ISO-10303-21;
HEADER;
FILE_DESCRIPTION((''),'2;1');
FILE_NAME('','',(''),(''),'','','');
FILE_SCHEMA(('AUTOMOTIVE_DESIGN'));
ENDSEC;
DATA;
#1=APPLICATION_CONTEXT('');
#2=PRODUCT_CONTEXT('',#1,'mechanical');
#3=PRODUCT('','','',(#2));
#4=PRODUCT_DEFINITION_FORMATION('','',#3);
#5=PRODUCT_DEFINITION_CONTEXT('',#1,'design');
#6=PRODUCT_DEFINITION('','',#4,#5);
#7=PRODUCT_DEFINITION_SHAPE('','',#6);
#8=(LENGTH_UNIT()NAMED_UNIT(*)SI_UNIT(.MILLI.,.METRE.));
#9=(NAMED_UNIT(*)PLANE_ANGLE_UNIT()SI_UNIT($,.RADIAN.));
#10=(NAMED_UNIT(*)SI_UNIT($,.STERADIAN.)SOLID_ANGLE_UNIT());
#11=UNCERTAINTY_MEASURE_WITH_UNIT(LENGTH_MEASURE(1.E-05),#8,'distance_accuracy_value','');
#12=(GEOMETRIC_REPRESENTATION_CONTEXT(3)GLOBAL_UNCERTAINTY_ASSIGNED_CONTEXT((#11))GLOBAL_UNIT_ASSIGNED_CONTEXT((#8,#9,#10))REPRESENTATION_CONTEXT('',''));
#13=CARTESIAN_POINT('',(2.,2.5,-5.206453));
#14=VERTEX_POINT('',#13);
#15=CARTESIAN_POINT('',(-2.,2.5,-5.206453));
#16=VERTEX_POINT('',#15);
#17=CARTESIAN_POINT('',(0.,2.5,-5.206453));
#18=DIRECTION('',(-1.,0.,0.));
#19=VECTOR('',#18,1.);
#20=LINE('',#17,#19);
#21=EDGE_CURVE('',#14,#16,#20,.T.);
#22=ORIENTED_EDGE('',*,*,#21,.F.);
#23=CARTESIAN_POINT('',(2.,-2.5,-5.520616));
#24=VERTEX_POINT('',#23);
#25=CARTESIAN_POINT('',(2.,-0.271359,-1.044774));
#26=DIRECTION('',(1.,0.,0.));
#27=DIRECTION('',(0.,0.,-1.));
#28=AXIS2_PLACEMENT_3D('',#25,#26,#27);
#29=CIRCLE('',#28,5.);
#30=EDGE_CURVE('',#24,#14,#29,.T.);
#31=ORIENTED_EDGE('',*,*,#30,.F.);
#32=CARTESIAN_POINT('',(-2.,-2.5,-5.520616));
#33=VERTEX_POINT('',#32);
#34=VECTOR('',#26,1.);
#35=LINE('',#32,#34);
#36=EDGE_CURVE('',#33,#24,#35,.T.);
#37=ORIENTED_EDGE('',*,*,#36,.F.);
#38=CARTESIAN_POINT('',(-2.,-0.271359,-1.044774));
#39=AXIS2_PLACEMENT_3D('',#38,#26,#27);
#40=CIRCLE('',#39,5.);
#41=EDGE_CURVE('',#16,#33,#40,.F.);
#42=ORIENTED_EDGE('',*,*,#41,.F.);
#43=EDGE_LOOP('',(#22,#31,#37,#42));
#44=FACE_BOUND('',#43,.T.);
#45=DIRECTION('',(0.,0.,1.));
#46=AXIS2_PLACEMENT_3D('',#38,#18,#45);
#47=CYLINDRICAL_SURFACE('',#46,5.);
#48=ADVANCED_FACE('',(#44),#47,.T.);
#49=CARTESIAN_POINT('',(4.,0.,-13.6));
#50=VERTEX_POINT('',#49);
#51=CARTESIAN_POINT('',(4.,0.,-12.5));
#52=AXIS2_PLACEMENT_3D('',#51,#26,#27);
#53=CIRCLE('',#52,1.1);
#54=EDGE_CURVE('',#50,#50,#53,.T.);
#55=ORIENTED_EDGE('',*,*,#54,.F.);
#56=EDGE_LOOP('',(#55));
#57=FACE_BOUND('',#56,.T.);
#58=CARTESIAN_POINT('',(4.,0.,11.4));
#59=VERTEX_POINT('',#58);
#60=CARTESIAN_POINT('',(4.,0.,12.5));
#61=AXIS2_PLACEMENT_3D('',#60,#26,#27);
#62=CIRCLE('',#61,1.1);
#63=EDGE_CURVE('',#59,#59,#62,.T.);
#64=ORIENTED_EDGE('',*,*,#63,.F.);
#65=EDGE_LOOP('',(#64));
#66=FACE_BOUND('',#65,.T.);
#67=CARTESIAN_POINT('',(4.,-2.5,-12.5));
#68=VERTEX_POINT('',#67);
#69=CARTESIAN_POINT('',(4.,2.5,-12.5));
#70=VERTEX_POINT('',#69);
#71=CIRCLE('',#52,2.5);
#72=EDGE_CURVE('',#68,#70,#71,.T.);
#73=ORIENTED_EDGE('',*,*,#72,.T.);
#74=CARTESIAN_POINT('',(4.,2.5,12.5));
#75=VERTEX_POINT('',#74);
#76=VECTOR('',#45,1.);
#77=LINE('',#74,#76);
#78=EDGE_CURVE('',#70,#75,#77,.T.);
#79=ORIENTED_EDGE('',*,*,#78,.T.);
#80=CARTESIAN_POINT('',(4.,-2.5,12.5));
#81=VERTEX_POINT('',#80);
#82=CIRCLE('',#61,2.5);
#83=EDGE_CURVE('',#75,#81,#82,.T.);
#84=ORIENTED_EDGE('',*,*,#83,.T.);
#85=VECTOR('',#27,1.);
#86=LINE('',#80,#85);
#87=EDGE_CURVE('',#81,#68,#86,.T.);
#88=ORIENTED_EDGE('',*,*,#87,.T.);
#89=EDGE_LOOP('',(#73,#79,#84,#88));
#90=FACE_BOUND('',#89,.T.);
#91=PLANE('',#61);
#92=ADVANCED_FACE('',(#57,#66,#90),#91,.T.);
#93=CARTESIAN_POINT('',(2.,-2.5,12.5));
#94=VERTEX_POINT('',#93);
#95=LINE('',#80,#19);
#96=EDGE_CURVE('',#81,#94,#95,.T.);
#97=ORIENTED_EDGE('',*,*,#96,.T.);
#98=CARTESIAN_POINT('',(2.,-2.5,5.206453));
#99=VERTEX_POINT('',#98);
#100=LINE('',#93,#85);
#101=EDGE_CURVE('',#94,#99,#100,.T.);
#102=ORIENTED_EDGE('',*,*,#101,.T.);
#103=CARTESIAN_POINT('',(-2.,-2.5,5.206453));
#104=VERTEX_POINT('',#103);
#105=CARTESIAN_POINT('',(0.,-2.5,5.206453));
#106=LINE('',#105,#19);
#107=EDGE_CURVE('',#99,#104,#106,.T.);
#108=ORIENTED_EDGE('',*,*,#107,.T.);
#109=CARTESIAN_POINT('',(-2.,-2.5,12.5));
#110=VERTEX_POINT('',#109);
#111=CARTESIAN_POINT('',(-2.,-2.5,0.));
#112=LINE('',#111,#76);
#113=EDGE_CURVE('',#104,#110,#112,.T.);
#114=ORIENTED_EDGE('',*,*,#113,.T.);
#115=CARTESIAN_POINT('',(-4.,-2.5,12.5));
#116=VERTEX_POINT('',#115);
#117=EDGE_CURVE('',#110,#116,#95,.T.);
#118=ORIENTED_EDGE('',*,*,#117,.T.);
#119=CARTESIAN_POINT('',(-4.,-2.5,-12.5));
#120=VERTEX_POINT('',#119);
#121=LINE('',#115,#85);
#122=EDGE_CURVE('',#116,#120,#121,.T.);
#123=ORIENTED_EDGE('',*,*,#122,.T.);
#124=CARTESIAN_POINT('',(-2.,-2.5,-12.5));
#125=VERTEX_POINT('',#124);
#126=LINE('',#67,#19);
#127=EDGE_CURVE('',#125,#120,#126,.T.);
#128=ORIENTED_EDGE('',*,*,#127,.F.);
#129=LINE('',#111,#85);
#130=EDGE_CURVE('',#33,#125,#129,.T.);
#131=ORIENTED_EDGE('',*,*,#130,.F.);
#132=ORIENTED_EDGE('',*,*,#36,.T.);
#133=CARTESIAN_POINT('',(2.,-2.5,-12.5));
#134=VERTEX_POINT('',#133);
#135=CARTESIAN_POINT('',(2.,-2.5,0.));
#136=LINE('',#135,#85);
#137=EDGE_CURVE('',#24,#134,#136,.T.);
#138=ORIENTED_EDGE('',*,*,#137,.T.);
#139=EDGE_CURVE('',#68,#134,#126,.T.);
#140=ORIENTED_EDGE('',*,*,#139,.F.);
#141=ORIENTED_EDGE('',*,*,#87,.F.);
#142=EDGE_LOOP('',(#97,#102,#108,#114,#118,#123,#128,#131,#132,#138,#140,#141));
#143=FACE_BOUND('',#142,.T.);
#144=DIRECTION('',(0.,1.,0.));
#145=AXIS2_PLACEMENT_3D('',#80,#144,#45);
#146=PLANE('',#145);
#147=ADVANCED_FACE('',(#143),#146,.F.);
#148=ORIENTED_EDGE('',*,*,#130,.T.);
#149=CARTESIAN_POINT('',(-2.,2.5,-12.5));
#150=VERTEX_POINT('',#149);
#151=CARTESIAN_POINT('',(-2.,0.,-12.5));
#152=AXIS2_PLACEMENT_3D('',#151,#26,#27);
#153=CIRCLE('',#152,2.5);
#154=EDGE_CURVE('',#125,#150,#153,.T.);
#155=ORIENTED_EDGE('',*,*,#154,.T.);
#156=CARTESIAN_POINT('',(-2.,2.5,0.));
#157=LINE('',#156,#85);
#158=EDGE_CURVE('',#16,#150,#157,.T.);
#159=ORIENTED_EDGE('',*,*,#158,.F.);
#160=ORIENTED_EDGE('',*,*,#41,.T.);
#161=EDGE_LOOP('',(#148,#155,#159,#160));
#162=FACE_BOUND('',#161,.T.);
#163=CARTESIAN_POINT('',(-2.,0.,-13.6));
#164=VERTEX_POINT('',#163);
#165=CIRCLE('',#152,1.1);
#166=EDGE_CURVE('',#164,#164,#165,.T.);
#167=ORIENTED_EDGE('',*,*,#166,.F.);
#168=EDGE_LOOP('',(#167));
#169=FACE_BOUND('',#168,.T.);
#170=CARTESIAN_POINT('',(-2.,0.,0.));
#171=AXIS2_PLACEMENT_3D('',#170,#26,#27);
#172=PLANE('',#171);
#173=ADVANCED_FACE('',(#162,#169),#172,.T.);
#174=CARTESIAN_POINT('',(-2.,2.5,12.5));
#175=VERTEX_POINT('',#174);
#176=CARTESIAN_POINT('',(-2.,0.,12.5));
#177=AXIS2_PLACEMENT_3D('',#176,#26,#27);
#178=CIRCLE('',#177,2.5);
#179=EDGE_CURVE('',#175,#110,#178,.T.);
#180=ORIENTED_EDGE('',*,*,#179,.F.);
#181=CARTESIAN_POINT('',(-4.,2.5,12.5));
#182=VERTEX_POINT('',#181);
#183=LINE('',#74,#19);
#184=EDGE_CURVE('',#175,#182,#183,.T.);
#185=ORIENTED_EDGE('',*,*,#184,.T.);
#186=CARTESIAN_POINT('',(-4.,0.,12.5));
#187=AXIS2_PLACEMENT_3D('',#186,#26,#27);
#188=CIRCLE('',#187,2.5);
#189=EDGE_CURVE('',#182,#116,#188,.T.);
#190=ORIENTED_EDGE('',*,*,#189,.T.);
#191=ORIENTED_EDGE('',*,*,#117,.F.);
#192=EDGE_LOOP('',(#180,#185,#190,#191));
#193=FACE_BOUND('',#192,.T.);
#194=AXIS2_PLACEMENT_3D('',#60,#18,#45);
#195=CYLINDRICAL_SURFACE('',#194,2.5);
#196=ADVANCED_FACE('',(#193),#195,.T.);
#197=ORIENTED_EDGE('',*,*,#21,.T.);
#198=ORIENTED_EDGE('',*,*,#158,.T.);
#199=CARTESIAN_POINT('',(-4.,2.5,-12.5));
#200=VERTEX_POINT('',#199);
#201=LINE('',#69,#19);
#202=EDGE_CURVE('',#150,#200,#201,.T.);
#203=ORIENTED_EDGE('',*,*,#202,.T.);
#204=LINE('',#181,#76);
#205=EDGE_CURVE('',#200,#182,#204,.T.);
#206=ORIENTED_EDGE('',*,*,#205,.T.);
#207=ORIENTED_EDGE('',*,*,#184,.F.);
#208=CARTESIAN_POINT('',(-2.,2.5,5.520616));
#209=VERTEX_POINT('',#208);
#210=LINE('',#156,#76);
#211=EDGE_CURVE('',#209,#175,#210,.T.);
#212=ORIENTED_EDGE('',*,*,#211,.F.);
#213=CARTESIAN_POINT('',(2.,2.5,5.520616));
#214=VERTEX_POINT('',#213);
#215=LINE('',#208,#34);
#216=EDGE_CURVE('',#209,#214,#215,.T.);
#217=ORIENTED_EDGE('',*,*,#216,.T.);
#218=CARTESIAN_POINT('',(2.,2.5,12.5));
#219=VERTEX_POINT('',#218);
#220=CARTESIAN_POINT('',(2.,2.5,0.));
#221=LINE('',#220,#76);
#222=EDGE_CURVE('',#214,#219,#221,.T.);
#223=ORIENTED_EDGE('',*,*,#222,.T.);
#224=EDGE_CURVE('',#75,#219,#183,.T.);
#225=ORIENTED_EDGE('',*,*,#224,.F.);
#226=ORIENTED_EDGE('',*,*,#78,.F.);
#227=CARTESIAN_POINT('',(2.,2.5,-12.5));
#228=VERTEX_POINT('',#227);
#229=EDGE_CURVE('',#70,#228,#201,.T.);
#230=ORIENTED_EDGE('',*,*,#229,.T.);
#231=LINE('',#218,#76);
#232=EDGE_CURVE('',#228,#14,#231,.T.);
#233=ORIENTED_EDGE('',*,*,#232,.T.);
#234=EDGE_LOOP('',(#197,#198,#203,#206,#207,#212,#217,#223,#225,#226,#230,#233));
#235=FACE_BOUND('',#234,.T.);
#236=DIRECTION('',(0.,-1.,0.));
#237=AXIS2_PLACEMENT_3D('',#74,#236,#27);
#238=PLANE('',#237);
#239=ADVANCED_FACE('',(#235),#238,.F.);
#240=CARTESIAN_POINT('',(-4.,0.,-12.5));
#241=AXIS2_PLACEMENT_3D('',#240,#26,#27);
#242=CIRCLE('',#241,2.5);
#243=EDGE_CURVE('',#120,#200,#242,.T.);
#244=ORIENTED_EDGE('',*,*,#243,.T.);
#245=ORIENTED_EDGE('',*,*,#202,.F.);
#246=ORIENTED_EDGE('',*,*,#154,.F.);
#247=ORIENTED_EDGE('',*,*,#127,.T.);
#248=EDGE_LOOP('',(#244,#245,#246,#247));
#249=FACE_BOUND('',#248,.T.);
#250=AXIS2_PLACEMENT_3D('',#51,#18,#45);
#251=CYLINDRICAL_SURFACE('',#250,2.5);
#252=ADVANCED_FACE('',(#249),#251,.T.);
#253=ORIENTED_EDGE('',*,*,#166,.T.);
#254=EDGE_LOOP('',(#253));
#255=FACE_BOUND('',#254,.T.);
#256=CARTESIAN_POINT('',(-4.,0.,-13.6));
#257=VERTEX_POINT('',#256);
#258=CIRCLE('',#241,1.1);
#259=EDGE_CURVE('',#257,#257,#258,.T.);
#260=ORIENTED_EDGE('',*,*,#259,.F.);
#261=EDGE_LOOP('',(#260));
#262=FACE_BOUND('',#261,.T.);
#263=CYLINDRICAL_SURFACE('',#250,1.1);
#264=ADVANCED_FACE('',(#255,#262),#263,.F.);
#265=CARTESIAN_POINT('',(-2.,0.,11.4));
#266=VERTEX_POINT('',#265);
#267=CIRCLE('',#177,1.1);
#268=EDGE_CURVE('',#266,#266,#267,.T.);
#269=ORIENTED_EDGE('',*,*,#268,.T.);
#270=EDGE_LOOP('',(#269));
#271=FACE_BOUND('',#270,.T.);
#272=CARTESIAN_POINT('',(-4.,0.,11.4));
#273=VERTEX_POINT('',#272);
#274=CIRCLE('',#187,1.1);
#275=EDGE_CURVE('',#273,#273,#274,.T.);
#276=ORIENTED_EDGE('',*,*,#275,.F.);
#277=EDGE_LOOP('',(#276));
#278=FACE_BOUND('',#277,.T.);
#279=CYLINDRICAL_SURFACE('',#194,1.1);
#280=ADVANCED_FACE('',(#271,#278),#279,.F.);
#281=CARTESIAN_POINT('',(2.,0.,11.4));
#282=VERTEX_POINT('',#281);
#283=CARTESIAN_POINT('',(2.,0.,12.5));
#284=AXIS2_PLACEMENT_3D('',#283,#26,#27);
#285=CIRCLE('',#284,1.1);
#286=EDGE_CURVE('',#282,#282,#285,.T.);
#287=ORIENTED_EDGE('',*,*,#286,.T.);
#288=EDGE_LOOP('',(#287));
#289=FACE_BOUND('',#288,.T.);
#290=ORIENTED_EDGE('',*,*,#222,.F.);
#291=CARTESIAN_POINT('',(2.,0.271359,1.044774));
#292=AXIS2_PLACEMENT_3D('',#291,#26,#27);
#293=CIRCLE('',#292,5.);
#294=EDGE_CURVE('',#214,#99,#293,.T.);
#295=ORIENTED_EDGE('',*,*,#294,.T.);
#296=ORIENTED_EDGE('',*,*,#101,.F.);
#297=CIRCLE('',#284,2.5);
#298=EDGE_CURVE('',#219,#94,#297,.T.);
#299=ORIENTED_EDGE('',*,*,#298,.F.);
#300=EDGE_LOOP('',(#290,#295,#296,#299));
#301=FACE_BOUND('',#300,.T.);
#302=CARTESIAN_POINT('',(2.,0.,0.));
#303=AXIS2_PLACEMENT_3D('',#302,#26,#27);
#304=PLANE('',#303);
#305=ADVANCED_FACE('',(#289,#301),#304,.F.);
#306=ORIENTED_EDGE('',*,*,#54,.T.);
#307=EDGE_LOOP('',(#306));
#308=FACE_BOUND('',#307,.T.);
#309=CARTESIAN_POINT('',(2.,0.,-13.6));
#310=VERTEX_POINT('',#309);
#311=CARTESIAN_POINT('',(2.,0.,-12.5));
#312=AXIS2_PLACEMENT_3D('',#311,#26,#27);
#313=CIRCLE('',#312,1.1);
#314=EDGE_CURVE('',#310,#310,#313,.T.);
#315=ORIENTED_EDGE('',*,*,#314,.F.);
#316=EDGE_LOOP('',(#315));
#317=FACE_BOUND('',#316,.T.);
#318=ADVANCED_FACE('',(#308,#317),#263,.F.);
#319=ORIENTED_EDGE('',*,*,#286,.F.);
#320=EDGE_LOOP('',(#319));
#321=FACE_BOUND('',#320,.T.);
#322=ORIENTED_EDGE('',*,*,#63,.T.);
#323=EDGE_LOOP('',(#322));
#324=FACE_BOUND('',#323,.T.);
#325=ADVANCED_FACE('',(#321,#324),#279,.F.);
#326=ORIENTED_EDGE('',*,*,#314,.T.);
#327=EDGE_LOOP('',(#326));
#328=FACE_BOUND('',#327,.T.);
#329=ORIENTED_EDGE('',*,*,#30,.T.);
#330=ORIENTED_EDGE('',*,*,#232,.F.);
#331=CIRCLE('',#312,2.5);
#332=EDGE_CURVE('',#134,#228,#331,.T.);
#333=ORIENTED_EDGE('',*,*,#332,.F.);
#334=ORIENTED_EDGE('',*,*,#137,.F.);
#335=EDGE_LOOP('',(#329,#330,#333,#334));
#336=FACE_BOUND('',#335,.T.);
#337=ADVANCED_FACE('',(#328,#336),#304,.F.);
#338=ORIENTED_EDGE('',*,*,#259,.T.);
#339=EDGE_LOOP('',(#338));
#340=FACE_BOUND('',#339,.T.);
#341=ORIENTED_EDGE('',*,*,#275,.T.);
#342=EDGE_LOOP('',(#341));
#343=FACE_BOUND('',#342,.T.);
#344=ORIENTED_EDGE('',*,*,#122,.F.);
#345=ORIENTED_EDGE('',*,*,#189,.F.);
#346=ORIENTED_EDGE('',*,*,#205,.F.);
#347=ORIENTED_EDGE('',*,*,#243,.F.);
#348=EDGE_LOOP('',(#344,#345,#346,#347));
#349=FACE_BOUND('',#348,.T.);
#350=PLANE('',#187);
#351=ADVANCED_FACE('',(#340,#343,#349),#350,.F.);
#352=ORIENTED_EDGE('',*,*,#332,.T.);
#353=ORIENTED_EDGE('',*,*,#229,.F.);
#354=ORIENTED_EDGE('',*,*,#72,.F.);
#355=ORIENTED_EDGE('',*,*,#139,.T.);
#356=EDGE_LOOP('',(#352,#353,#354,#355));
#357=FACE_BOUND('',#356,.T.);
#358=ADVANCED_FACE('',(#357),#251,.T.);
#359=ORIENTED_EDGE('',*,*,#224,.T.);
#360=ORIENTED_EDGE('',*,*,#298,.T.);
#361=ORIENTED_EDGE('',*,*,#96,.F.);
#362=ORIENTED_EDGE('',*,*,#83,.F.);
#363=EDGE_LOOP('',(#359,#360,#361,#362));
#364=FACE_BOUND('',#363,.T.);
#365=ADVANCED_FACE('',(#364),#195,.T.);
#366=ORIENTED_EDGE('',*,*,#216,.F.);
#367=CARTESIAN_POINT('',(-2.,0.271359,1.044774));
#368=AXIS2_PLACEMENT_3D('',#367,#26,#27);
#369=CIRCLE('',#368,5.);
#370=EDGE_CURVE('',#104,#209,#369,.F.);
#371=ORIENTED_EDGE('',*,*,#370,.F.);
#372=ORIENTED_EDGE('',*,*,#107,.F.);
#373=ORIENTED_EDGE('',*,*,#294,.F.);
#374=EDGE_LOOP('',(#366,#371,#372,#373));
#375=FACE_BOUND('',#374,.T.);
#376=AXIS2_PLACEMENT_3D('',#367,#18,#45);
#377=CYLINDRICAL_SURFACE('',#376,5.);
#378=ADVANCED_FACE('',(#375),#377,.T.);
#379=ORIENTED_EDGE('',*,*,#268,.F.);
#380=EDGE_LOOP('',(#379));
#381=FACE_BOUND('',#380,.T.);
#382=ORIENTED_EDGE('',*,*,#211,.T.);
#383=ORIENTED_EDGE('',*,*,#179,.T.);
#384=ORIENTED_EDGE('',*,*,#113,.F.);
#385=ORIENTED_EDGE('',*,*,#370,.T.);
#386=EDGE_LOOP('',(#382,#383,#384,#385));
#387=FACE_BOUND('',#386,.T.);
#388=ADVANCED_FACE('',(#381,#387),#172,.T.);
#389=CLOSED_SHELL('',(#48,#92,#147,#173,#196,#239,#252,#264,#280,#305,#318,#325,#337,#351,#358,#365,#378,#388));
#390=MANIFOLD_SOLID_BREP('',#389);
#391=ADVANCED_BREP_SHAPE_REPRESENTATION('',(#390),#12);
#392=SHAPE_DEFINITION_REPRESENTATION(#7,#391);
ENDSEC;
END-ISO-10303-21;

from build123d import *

# Parameters (mm, degrees)
SKETCH_1_R          = 1.1
EXTRUDE_1_DEPTH     = 4
SKETCH_2_R          = 4
CUT_EXTRUDE_1_DEPTH = 2
FILLET_1_R          = 5


with BuildPart() as part:
    # 草图1 → 凸台-拉伸1 (new, symmetric)
    with BuildSketch(Plane(origin=(0, 0, 0), x_dir=(0, 0, -1), z_dir=(1, 0, 0))):
        with BuildLine():
            Line((-12.5, 2.5), (12.5, 2.5))
            ThreePointArc((12.5, 2.5), (15, 0), (12.5, -2.5))
            Line((12.5, -2.5), (-12.5, -2.5))
            ThreePointArc((-12.5, -2.5), (-15, 0), (-12.5, 2.5))
        make_face()
        with Locations((12.5, 0)):
            Circle(SKETCH_1_R, mode=Mode.SUBTRACT)
        with Locations((-12.5, 0)):
            Circle(SKETCH_1_R, mode=Mode.SUBTRACT)
    extrude(amount=EXTRUDE_1_DEPTH, both=True)

    # 草图2 → 切除-拉伸1 (cut, symmetric)
    with BuildSketch(Plane(origin=(0, 0, 0), x_dir=(0, 0, -1), z_dir=(1, 0, 0))):
        with BuildLine():
            ThreePointArc((-9.377501001, 2.5), (-8.725745372, 1.324764885), (-8.5, 0))
            Line((-8.5, 0), (-5.520616019, 2.5))
            Line((-5.520616019, 2.5), (-9.377501001, 2.5))
        make_face()
        with BuildLine():
            Line((-5.520616019, -2.5), (-8.5, 0))
            ThreePointArc((-8.5, 0), (-8.725745372, -1.324764885), (-9.377501001, -2.5))
            Line((-9.377501001, -2.5), (-5.520616019, -2.5))
        make_face()
        with Locations((-12.5, 0)):
            Circle(SKETCH_2_R)
        with Locations((12.5, 0)):
            Circle(SKETCH_2_R)
        with BuildLine():
            Line((9.377501001, 2.5), (5.520616019, 2.5))
            Line((5.520616019, 2.5), (8.5, 0))
            ThreePointArc((8.5, 0), (8.725745372, 1.324764885), (9.377501001, 2.5))
        make_face()
        with BuildLine():
            ThreePointArc((9.377501001, -2.5), (8.725745372, -1.324764885), (8.5, 0))
            Line((8.5, 0), (5.520616019, -2.5))
            Line((5.520616019, -2.5), (9.377501001, -2.5))
        make_face()
    extrude(amount=CUT_EXTRUDE_1_DEPTH, both=True, mode=Mode.SUBTRACT)

    # 圆角1
    # the kernel refuses this fillet: 5 mm, written as the material it takes off along each edge
    with BuildSketch(Plane(origin=(2, 0, -8.5), x_dir=(0, -0.6427876096865346, 0.766044443118982), z_dir=(-1, 0, 0))) as fillet_1_piece_1:
        with BuildLine():
            CenterArc((5.885460651, 4.584253576), FILLET_1_R, 170, 76.469935568)
            Line((0.961421886, 5.452494464), (0, 0))
            Line((0, 0), (3.889309567, 0))
        make_face()
    extrude(amount=4, mode=Mode.SUBTRACT)
    with BuildSketch(Plane(origin=(-2, 0, 8.5), x_dir=(0, -0.6427876096865349, -0.7660444431189818), z_dir=(1, 0, 0))) as fillet_1_piece_2:
        with BuildLine():
            CenterArc((5.53660798, 5), FILLET_1_R, 193.530064432, 76.469935568)
            Line((0.675371519, 3.830222216), (0, 0))
            Line((0, 0), (5.53660798, 0))
        make_face()
    extrude(amount=4, mode=Mode.SUBTRACT)


solid = part.part
